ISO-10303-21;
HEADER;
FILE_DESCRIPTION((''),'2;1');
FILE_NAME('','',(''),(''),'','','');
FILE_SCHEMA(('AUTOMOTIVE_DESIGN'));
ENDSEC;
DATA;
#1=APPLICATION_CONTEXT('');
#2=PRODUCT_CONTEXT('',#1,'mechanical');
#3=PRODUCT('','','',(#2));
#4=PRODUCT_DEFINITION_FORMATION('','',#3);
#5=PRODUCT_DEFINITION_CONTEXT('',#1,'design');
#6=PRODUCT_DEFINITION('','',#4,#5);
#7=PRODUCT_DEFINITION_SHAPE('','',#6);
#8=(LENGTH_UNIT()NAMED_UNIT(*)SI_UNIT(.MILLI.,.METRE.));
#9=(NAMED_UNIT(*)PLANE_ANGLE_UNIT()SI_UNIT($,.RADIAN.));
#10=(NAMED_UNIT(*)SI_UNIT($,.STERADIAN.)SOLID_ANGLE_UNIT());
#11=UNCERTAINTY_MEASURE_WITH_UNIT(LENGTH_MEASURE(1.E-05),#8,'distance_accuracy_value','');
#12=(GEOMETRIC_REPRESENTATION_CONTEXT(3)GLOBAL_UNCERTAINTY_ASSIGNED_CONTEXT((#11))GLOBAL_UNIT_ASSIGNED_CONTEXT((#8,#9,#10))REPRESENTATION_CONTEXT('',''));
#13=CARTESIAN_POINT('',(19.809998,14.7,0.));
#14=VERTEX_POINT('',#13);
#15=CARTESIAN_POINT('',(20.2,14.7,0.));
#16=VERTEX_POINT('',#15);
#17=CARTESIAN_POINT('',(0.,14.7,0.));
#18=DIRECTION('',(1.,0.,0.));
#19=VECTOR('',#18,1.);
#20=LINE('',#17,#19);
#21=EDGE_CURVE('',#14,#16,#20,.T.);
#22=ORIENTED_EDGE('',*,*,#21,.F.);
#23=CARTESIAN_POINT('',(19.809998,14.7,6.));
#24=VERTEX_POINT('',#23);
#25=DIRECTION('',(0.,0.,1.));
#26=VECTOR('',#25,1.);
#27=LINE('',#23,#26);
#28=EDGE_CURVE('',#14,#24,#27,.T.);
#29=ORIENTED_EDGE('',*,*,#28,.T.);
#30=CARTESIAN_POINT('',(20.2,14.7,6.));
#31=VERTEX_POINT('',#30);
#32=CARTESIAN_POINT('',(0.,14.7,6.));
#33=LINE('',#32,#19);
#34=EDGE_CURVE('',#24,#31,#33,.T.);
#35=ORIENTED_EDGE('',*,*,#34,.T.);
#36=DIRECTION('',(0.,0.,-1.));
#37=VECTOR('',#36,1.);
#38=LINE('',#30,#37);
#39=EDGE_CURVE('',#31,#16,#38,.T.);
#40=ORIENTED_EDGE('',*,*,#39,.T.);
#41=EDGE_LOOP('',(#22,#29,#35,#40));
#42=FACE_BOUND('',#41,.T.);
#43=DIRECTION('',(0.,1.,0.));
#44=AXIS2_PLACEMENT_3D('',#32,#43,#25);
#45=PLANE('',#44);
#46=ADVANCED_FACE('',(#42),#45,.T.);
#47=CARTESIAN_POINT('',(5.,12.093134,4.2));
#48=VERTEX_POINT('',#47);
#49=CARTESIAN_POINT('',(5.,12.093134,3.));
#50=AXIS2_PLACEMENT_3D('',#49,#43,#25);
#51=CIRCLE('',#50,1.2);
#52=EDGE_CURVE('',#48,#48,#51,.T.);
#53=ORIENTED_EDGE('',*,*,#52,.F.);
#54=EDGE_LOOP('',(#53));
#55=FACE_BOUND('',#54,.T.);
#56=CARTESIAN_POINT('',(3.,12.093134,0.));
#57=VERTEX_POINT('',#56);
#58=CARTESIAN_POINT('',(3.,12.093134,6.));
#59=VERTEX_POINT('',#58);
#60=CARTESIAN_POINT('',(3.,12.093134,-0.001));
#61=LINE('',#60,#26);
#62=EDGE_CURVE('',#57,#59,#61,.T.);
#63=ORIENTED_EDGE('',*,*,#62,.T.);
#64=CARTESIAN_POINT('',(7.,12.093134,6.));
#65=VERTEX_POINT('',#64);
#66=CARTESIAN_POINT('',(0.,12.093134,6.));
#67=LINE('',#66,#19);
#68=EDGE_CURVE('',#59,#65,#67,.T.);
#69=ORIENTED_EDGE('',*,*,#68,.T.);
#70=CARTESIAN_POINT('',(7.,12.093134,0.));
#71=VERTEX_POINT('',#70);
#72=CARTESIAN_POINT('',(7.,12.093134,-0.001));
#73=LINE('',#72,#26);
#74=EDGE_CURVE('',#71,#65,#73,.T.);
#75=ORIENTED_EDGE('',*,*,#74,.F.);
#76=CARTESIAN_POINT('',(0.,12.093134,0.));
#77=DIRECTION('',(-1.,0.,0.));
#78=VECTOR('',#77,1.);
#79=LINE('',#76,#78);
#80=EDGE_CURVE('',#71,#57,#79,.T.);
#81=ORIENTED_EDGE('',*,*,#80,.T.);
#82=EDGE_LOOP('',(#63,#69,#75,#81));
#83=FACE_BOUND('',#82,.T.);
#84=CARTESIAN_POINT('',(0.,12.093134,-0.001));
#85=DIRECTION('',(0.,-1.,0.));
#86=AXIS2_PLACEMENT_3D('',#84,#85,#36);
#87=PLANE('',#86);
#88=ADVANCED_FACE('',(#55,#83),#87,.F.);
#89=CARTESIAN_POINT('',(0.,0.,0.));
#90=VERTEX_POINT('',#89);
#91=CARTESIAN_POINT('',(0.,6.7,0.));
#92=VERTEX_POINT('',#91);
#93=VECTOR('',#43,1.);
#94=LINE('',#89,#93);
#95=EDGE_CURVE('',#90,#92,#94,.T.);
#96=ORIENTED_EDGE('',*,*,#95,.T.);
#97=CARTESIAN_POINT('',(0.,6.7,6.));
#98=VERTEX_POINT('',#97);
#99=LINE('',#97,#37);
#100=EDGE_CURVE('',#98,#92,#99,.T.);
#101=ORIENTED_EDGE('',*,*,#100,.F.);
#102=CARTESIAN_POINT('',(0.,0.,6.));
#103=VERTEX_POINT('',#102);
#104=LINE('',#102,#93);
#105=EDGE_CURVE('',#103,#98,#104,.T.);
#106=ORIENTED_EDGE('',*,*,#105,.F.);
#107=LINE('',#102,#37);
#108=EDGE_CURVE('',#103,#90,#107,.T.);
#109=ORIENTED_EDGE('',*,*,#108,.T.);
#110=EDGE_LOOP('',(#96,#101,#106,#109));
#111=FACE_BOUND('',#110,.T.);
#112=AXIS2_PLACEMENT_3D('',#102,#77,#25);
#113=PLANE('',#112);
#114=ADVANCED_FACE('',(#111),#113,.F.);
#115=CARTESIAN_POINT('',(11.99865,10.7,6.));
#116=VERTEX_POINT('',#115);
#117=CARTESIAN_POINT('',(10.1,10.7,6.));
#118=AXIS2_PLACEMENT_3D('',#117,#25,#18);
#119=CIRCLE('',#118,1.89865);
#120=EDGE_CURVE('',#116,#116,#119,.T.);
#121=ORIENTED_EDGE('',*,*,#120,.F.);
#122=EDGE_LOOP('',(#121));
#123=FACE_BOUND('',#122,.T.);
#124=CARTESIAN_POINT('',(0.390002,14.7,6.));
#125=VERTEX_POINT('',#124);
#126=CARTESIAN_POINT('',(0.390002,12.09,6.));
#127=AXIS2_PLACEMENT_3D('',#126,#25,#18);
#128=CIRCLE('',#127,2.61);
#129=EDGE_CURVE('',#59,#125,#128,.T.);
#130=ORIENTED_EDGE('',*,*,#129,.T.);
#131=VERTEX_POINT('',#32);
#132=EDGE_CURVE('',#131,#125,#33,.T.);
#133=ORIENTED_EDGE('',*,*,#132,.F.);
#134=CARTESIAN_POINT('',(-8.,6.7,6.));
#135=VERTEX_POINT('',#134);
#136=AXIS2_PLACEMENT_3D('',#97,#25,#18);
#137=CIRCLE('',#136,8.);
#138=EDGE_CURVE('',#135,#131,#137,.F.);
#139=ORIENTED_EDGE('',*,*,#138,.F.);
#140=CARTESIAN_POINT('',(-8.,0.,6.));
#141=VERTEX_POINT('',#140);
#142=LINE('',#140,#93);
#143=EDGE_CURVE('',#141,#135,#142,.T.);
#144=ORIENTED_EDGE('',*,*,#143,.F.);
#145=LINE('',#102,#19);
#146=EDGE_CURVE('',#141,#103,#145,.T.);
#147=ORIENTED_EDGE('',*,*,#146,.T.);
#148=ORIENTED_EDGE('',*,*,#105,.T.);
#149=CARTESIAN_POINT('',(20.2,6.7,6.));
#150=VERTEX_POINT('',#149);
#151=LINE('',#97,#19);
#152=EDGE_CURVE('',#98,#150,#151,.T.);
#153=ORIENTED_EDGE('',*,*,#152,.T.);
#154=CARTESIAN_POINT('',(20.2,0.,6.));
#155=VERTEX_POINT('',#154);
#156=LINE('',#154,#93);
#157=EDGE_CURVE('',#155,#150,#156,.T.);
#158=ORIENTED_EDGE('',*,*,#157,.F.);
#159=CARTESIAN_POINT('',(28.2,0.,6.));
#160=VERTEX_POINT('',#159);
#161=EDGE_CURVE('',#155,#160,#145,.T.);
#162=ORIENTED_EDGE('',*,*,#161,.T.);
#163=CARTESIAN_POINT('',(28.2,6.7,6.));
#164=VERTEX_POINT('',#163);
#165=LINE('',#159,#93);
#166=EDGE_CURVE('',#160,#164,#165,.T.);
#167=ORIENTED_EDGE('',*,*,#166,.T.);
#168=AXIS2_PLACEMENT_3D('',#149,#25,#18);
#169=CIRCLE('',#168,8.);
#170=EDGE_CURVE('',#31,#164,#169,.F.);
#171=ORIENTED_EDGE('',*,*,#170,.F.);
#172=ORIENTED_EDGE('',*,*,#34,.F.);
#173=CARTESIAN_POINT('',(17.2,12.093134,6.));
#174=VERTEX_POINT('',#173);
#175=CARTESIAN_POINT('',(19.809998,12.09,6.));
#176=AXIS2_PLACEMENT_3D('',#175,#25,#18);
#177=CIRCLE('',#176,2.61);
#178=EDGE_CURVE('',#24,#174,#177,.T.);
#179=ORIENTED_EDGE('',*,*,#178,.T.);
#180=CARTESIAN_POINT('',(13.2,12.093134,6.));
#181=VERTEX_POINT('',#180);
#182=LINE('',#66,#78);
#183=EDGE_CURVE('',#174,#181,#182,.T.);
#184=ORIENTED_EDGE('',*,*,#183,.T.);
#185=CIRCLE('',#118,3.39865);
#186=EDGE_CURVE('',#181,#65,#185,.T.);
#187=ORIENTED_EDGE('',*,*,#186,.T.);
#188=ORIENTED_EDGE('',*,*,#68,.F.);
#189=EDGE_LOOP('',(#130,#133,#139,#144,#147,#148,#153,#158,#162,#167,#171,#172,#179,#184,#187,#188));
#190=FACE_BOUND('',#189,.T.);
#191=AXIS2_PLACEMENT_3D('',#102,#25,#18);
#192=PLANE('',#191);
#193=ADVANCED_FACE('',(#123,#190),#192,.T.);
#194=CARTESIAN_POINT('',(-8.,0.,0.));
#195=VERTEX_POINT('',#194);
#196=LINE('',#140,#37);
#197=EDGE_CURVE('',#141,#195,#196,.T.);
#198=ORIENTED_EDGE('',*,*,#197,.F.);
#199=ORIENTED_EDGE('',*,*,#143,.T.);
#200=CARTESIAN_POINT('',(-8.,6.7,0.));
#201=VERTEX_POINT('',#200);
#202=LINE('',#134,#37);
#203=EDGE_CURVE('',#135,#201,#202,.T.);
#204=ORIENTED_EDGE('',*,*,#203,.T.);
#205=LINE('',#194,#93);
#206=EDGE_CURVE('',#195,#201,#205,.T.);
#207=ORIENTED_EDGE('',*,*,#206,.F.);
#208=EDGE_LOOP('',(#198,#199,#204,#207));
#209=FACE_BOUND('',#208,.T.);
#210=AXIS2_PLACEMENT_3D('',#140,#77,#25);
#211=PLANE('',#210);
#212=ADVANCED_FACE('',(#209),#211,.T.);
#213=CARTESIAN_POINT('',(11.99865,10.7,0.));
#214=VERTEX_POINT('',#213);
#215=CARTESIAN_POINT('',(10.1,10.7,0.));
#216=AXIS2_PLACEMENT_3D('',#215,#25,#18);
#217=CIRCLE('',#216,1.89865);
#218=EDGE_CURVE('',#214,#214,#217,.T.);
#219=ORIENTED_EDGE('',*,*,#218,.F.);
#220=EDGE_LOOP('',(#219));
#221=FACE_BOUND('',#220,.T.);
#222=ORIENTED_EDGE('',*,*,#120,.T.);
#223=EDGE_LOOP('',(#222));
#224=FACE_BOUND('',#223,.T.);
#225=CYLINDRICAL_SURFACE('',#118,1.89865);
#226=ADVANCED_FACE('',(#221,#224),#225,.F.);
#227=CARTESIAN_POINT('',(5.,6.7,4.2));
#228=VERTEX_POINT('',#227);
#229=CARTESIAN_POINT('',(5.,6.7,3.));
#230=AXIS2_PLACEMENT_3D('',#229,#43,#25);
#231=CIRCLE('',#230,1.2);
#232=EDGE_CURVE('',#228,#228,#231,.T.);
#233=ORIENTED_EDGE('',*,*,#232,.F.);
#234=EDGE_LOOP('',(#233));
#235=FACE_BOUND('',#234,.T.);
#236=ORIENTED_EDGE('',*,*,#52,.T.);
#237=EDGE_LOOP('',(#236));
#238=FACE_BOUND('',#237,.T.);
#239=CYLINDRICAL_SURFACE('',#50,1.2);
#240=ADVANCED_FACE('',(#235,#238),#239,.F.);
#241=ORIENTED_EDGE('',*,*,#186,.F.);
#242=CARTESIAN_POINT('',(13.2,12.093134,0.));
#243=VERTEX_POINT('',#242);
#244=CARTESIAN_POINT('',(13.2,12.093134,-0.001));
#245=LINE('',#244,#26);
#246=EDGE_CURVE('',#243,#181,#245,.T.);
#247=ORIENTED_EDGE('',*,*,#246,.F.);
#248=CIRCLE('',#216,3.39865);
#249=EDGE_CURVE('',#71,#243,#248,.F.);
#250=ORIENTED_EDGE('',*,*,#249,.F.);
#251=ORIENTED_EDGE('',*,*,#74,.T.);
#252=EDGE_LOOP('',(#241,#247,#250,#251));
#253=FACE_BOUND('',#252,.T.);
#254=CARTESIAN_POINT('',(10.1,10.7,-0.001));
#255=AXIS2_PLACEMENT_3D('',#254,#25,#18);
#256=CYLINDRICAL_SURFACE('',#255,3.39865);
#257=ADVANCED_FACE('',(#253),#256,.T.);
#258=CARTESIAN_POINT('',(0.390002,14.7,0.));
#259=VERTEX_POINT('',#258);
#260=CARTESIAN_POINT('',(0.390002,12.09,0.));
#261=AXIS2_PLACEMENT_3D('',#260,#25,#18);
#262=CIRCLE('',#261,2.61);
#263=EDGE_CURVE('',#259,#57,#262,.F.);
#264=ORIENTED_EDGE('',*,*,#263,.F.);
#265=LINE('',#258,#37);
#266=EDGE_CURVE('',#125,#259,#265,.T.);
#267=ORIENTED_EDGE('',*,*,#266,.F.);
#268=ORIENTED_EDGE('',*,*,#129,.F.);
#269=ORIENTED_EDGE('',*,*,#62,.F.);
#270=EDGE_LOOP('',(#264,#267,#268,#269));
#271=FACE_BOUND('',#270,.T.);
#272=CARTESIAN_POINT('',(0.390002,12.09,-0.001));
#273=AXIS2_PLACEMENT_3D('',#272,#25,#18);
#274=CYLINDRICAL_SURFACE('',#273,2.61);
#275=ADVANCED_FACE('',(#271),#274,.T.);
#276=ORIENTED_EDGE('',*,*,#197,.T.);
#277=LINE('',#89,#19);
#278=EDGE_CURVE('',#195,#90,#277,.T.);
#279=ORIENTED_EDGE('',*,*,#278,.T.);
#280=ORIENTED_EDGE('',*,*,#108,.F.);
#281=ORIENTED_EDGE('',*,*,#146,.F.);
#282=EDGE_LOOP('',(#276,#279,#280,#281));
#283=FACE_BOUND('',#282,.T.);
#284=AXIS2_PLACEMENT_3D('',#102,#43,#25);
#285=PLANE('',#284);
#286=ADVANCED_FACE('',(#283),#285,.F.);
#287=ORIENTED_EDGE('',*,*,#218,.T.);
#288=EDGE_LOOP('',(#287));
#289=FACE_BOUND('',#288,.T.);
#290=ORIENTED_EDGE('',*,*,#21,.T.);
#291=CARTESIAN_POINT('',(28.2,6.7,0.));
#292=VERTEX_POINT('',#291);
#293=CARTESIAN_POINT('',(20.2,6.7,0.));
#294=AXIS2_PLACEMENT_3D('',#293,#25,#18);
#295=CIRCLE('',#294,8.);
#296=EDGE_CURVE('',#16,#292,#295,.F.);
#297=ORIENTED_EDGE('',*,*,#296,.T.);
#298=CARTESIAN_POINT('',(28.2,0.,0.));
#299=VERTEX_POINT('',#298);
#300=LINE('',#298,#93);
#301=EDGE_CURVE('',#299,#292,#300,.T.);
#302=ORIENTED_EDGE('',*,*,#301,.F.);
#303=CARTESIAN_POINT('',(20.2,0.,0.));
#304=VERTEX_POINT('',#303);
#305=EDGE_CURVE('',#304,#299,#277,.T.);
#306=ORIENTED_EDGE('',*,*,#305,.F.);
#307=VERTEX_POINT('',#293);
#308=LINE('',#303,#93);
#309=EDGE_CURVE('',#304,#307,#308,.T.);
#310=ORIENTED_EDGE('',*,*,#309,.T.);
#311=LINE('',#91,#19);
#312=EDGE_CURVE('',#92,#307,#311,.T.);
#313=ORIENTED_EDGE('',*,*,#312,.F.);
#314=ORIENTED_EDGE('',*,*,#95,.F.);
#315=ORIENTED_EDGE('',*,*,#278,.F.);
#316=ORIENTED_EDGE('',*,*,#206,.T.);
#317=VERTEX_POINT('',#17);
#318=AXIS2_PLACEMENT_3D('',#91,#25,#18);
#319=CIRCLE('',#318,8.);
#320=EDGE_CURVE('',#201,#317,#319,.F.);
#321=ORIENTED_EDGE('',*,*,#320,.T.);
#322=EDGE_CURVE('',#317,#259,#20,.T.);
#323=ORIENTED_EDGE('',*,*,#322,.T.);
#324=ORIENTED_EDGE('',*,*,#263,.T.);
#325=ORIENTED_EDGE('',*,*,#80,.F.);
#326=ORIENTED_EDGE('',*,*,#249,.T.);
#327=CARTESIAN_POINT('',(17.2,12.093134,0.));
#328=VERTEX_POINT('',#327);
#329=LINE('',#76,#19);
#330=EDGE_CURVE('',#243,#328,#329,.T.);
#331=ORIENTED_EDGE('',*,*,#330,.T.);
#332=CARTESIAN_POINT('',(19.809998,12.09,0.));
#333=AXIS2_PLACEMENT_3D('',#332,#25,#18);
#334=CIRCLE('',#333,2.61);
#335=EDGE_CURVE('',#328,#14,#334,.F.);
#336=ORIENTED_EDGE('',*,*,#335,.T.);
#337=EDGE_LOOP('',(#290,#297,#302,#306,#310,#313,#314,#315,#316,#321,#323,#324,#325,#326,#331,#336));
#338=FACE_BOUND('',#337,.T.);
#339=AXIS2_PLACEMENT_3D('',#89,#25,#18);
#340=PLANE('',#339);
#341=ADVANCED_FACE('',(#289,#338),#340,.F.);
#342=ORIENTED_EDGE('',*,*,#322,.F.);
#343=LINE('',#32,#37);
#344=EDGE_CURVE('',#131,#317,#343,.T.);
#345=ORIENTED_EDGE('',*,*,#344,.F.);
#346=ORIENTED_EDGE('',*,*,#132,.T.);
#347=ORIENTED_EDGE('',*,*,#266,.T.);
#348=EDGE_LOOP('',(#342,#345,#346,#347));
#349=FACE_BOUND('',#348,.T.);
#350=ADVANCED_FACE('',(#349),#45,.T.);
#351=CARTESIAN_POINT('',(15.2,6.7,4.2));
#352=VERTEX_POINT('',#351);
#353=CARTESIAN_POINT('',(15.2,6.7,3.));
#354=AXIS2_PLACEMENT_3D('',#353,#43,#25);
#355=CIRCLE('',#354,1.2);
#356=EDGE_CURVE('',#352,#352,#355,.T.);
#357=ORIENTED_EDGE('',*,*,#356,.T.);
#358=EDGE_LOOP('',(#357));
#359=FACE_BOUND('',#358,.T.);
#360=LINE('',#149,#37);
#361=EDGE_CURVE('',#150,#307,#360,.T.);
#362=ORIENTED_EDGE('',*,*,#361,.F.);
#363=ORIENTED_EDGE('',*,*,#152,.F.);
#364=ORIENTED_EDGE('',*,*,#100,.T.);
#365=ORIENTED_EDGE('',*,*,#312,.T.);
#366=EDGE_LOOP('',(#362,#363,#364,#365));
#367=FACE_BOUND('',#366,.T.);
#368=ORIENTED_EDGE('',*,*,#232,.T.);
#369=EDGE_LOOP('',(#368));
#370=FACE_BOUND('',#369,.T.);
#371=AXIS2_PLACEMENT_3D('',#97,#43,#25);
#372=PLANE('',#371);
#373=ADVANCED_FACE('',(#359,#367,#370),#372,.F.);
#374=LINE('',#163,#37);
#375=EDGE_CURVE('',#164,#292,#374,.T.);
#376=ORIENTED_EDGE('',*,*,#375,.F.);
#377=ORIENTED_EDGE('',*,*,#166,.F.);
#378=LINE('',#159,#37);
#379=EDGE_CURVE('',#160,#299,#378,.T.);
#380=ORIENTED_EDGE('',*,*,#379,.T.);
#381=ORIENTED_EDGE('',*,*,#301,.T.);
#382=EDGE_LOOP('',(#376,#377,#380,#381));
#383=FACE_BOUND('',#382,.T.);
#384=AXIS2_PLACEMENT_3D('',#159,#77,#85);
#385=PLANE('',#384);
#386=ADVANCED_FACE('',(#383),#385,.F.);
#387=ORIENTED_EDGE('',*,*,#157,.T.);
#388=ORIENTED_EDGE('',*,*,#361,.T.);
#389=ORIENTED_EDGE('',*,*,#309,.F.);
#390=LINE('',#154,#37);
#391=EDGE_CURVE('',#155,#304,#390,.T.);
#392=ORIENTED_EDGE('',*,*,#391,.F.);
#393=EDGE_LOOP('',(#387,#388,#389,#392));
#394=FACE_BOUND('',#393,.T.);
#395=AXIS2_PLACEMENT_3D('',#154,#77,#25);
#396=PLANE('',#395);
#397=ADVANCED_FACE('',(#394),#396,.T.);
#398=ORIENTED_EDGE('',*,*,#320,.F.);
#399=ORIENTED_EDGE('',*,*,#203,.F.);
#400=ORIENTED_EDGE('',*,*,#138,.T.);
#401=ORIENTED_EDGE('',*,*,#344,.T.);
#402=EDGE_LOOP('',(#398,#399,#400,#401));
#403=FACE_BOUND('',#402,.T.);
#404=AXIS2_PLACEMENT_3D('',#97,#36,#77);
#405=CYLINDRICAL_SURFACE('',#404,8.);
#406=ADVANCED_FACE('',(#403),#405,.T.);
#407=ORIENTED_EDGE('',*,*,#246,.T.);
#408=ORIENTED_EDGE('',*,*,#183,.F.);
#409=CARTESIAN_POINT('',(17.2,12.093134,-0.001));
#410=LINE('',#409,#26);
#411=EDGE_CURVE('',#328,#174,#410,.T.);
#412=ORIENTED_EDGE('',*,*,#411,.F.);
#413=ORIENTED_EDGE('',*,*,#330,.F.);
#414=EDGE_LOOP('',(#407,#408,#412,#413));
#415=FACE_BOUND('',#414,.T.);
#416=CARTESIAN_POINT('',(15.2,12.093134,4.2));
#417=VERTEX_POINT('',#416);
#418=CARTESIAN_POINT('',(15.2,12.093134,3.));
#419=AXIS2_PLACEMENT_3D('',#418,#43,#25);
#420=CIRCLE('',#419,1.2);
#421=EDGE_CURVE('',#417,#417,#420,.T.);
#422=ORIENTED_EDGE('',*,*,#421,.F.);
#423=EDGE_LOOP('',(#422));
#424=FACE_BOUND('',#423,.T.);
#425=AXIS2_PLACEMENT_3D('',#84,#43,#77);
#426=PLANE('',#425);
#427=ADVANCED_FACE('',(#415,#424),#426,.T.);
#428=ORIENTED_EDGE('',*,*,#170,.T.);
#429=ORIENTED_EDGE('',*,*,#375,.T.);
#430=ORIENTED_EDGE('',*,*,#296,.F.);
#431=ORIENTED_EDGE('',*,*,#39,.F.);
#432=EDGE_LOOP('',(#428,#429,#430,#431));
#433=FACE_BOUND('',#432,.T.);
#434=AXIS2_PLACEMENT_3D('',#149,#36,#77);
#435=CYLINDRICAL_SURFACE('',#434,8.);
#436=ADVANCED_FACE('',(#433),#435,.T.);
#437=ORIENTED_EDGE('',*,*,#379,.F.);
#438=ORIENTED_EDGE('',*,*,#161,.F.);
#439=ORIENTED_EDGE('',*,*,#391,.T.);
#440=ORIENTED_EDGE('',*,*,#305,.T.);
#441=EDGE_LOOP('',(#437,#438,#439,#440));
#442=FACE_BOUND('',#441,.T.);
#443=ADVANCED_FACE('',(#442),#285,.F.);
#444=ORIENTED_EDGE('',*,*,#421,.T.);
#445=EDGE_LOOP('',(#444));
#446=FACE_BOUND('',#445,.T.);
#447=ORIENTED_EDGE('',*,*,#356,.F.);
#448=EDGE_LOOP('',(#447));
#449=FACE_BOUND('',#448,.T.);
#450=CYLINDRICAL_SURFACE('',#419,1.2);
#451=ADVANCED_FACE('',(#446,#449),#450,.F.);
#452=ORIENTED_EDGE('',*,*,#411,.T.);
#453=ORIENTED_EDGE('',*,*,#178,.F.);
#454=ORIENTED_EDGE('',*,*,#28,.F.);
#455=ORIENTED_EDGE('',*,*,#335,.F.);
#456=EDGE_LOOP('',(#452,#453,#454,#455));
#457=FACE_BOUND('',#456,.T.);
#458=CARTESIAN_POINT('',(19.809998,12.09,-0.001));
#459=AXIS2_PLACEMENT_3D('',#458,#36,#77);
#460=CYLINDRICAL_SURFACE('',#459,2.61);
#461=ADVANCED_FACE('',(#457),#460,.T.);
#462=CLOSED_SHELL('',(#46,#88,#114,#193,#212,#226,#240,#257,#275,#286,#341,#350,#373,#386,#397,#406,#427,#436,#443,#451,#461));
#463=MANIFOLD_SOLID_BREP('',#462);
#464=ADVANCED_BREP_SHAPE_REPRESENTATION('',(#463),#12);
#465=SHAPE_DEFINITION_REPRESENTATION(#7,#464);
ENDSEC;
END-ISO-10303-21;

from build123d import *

# Parameters (mm, degrees)
BOSS_EXTRUDE1_DEPTH   = 6
F_6_CLEARANCE_HOLE1_D = 3.7973
CUT_EXTRUDE1_REACH    = 34.362
FILLET1_R             = 2.61
M2_CLEARANCE_HOLE1_D  = 2.4


with BuildPart() as part:
    # Sketch1 → Boss-Extrude1 (new body)
    with BuildSketch(Plane.XY):
        with BuildLine():
            ThreePointArc((-8, 6.7), (-5.656854249, 12.356854249), (0, 14.7))
            Line((0, 14.7), (20.2, 14.7))
            ThreePointArc((20.2, 14.7), (25.856854249, 12.356854249), (28.2, 6.7))
            Line((28.2, 6.7), (28.2, 0))
            Line((28.2, 0), (20.2, 0))
            Line((20.2, 0), (20.2, 6.7))
            Line((20.2, 6.7), (0, 6.7))
            Line((0, 6.7), (0, 0))
            Line((0, 0), (-8, 0))
            Line((-8, 0), (-8, 6.7))
        make_face()
    extrude(amount=BOSS_EXTRUDE1_DEPTH)

    # #6 Clearance Hole1 (through all)
    with Locations(Plane.XY.offset(6)):
        with Locations((10.1, 10.7)):
            Hole(F_6_CLEARANCE_HOLE1_D / 2)

    # Sketch5 → Cut-Extrude1 (cut, up to next)
    with BuildSketch(Plane.XY.offset(6), mode=Mode.PRIVATE) as cut_extrude1_sk1:
        with BuildLine():
            Line((7, 14.7), (3, 14.7))
            Line((3, 14.7), (3, 12.093133814))
            Line((3, 12.093133814), (7, 12.093133814))
            ThreePointArc((7, 12.093133814), (10.1, 14.09865), (13.2, 12.093133814))
            Line((13.2, 12.093133814), (17.2, 12.093133814))
            Line((17.2, 12.093133814), (17.2, 14.7))
            Line((17.2, 14.7), (13.2, 14.7))
            Line((13.2, 14.7), (7, 14.7))
        make_face()
    cut_extrude1_tool1 = extrude(cut_extrude1_sk1.sketch, amount=-CUT_EXTRUDE1_REACH, mode=Mode.PRIVATE) & part.part
    add(cut_extrude1_tool1.solids().sort_by_distance((10.1, 14.243023, 6))[0], mode=Mode.SUBTRACT)

    # Fillet1
    # the kernel refuses this fillet: 2.61 mm, written as the material it takes off along each edge
    with BuildSketch(Plane(origin=(17.2, 14.7, 12.524995297), x_dir=(1, 0, 0), z_dir=(0, 0, -1))) as fillet1_piece_1:
        with BuildLine():
            CenterArc((2.609998119, 2.61), FILLET1_R, 180.068794764, 89.931205236)
            Line((0, 2.606866186), (-0.052199962, 2.60680351))
            Line((-0.052199962, 2.60680351), (-0.0522, 0))
            Line((-0.0522, 0), (0, -0.0522))
            Line((0, -0.0522), (2.609998119, -0.0522))
            Line((2.609998119, -0.0522), (2.609998119, 0))
        make_face()
    extrude(amount=19.049990593, mode=Mode.SUBTRACT)
    with BuildSketch(Plane(origin=(3, 14.7, 12.524995297), x_dir=(-1, 0, 0), z_dir=(0, 0, -1))) as fillet1_piece_2:
        with BuildLine():
            CenterArc((2.609998119, -2.61), FILLET1_R, 90, 89.931205236)
            Line((0, -2.606866186), (-0.052199962, -2.60680351))
            Line((-0.052199962, -2.60680351), (-0.0522, 0))
            Line((-0.0522, 0), (0, 0.0522))
            Line((0, 0.0522), (2.609998119, 0.0522))
            Line((2.609998119, 0.0522), (2.609998119, 0))
        make_face()
    extrude(amount=19.049990593, mode=Mode.SUBTRACT)

    # M2 Clearance Hole1 (through all)
    with Locations(Plane(origin=(0, 12.093133814, 0), x_dir=(1, 0, 0), z_dir=(0, 1, 0))):
        with Locations((5, -3), (15.2, -3)):
            Hole(M2_CLEARANCE_HOLE1_D / 2)


solid = part.part
